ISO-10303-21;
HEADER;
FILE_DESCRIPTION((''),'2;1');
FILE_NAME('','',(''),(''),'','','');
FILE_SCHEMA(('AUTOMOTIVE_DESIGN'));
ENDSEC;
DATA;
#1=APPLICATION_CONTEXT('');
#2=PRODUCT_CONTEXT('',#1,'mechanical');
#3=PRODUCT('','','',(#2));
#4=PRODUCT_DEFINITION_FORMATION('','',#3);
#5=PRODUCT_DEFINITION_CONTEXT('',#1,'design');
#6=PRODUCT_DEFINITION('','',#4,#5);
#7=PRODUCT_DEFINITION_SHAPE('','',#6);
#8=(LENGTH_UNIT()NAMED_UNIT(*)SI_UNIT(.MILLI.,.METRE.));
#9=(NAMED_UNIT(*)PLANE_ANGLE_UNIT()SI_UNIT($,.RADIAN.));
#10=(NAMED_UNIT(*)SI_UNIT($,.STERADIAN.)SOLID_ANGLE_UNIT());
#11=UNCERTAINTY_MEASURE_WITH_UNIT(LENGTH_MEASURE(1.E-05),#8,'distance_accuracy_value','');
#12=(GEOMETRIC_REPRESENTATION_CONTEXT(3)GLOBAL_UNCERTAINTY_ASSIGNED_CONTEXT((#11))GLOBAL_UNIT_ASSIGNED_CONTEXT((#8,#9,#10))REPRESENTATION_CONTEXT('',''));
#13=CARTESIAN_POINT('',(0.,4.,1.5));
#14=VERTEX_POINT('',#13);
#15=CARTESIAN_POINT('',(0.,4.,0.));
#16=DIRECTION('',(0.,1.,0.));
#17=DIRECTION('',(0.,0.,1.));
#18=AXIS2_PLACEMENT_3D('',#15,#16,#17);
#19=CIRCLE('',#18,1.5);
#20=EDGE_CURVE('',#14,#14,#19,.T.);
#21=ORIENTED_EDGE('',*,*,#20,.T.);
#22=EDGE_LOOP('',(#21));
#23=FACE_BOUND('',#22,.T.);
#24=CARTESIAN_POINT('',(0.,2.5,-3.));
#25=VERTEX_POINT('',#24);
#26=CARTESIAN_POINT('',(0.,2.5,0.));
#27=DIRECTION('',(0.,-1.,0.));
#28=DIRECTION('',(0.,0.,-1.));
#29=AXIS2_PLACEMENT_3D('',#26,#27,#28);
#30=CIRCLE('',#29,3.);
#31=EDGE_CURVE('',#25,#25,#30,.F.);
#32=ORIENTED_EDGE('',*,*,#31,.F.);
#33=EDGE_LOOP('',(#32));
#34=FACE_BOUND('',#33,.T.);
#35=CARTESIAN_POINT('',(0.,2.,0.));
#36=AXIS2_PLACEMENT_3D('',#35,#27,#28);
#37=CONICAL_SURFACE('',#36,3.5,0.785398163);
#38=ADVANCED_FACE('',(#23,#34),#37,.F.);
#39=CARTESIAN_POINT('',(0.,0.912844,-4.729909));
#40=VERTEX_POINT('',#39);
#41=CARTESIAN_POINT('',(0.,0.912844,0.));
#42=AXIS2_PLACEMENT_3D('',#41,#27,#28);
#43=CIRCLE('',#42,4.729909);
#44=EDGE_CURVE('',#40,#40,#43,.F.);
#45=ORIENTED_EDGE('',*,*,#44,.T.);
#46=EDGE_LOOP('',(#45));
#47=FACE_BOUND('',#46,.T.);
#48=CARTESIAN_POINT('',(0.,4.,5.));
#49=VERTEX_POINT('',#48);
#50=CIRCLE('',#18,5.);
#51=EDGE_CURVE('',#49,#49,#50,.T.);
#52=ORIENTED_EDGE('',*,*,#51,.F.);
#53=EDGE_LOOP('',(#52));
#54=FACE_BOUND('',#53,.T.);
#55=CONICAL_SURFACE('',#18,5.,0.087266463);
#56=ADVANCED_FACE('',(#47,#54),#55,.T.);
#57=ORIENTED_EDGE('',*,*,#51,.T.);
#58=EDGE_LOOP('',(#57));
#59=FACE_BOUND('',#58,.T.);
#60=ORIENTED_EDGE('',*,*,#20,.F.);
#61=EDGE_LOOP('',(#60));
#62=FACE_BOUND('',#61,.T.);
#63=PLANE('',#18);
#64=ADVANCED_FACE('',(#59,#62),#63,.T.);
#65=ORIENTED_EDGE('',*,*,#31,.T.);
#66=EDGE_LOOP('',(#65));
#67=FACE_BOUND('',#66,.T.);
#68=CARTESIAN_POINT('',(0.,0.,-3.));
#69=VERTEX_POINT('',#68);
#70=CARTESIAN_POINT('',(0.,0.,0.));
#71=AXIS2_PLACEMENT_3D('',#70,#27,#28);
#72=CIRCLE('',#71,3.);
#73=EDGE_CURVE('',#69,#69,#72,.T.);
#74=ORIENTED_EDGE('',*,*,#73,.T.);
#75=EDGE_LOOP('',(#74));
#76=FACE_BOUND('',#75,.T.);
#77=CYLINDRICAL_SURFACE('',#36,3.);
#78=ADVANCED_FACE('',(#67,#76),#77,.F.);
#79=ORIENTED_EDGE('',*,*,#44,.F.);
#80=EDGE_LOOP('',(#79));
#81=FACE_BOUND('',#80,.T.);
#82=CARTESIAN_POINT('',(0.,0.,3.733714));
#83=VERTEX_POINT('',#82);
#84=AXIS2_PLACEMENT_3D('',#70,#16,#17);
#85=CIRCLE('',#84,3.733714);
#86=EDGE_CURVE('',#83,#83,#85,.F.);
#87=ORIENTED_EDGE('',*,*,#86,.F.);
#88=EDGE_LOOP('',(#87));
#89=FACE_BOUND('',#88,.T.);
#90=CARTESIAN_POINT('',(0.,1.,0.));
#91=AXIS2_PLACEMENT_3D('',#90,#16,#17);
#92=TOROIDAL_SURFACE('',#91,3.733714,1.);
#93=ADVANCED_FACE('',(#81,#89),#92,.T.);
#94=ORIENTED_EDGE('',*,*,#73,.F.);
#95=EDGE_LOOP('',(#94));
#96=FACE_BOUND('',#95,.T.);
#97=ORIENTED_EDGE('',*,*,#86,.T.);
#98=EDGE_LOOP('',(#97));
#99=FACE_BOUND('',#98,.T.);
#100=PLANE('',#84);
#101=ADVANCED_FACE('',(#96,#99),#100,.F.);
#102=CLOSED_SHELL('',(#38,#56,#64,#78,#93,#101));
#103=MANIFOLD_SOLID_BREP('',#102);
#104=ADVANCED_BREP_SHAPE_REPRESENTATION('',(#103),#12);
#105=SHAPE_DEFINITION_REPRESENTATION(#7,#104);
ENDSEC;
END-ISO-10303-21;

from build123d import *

# Parameters (mm, degrees)
SKETCH_1_R          = 5
EXTRUDE_1_DEPTH     = 4
SKETCH_2_R          = 1.5
CUT_EXTRUDE_1_DEPTH = 5
DRAFT_1_ANGLE       = -1
DRAFT_4_ANGLE       = -5
SKETCH_3_R          = 3
CUT_EXTRUDE_2_DEPTH = 2
FILLET_1_R          = 1
CHAMFER_1_SIZE      = 2


with BuildPart() as part:
    # Эскиз1 → Бобышка-Вытянуть1 (new body)
    with BuildSketch(Plane(origin=(0, 0, 0), x_dir=(1, 0, 0), z_dir=(0, 1, 0))):
        with Locations(Location((0, 0, 0), (0, 0, 270))):
            Circle(SKETCH_1_R)
    extrude(amount=EXTRUDE_1_DEPTH)

    # Эскиз2 → Вырез-Вытянуть1 (cut)
    with BuildSketch(Plane(origin=(0, 4, 0), x_dir=(1, 0, 0), z_dir=(0, 1, 0))):
        with Locations(Location((0, 0, 0), (0, 0, 270))):
            Circle(SKETCH_2_R)
    extrude(amount=-CUT_EXTRUDE_1_DEPTH, mode=Mode.SUBTRACT)

    # Уклон1
    draft_1_faces = [part.faces().sort_by_distance(p)[0] for p in [
        (0, 2, -5),
    ]]
    draft(draft_1_faces, Plane.ZX.offset(4), DRAFT_1_ANGLE)

    # Уклон4
    draft_4_faces = [part.faces().sort_by_distance(p)[0] for p in [
        (0, 2, -4.96508987),
    ]]
    draft(draft_4_faces, Plane.ZX.offset(4), DRAFT_4_ANGLE)

    # Эскиз3 → Вырез-Вытянуть2 (cut)
    with BuildSketch(Plane.XZ):
        with Locations(Location((0, 0, 0), (0, 0, 270))):
            Circle(SKETCH_3_R)
    extrude(amount=-CUT_EXTRUDE_2_DEPTH, mode=Mode.SUBTRACT)

    # Скругление1
    fillet_1_edges = [part.edges().sort_by_distance(p)[0] for p in [
        (0, 0, -4.650045346),
    ]]
    fillet(fillet_1_edges, radius=FILLET_1_R)

    # Фаска1
    # the kernel refuses this chamfer: 2 mm, written as the material it takes off along each edge
    with BuildSketch(Plane(origin=(0, 2, 0), x_dir=(0, 0, 1), z_dir=(-1, 0, 0))) as chamfer_1_piece_1_section:
        Polygon((1.5, CHAMFER_1_SIZE), (1.5 + CHAMFER_1_SIZE, 0), (1.5, 0), align=None)
    chamfer_1_piece_1 = revolve(axis=Axis((0, 2, 0), (0, 1, 0)), mode=Mode.PRIVATE)
    chamfer_1_piece_1 = chamfer_1_piece_1 & Plane(origin=(0, 3.257194568, 0), x_dir=(0, 0, -1), z_dir=(0, -1, 0)) * Cylinder(3, 14, mode=Mode.PRIVATE)
    add(chamfer_1_piece_1, mode=Mode.SUBTRACT)


solid = part.part
